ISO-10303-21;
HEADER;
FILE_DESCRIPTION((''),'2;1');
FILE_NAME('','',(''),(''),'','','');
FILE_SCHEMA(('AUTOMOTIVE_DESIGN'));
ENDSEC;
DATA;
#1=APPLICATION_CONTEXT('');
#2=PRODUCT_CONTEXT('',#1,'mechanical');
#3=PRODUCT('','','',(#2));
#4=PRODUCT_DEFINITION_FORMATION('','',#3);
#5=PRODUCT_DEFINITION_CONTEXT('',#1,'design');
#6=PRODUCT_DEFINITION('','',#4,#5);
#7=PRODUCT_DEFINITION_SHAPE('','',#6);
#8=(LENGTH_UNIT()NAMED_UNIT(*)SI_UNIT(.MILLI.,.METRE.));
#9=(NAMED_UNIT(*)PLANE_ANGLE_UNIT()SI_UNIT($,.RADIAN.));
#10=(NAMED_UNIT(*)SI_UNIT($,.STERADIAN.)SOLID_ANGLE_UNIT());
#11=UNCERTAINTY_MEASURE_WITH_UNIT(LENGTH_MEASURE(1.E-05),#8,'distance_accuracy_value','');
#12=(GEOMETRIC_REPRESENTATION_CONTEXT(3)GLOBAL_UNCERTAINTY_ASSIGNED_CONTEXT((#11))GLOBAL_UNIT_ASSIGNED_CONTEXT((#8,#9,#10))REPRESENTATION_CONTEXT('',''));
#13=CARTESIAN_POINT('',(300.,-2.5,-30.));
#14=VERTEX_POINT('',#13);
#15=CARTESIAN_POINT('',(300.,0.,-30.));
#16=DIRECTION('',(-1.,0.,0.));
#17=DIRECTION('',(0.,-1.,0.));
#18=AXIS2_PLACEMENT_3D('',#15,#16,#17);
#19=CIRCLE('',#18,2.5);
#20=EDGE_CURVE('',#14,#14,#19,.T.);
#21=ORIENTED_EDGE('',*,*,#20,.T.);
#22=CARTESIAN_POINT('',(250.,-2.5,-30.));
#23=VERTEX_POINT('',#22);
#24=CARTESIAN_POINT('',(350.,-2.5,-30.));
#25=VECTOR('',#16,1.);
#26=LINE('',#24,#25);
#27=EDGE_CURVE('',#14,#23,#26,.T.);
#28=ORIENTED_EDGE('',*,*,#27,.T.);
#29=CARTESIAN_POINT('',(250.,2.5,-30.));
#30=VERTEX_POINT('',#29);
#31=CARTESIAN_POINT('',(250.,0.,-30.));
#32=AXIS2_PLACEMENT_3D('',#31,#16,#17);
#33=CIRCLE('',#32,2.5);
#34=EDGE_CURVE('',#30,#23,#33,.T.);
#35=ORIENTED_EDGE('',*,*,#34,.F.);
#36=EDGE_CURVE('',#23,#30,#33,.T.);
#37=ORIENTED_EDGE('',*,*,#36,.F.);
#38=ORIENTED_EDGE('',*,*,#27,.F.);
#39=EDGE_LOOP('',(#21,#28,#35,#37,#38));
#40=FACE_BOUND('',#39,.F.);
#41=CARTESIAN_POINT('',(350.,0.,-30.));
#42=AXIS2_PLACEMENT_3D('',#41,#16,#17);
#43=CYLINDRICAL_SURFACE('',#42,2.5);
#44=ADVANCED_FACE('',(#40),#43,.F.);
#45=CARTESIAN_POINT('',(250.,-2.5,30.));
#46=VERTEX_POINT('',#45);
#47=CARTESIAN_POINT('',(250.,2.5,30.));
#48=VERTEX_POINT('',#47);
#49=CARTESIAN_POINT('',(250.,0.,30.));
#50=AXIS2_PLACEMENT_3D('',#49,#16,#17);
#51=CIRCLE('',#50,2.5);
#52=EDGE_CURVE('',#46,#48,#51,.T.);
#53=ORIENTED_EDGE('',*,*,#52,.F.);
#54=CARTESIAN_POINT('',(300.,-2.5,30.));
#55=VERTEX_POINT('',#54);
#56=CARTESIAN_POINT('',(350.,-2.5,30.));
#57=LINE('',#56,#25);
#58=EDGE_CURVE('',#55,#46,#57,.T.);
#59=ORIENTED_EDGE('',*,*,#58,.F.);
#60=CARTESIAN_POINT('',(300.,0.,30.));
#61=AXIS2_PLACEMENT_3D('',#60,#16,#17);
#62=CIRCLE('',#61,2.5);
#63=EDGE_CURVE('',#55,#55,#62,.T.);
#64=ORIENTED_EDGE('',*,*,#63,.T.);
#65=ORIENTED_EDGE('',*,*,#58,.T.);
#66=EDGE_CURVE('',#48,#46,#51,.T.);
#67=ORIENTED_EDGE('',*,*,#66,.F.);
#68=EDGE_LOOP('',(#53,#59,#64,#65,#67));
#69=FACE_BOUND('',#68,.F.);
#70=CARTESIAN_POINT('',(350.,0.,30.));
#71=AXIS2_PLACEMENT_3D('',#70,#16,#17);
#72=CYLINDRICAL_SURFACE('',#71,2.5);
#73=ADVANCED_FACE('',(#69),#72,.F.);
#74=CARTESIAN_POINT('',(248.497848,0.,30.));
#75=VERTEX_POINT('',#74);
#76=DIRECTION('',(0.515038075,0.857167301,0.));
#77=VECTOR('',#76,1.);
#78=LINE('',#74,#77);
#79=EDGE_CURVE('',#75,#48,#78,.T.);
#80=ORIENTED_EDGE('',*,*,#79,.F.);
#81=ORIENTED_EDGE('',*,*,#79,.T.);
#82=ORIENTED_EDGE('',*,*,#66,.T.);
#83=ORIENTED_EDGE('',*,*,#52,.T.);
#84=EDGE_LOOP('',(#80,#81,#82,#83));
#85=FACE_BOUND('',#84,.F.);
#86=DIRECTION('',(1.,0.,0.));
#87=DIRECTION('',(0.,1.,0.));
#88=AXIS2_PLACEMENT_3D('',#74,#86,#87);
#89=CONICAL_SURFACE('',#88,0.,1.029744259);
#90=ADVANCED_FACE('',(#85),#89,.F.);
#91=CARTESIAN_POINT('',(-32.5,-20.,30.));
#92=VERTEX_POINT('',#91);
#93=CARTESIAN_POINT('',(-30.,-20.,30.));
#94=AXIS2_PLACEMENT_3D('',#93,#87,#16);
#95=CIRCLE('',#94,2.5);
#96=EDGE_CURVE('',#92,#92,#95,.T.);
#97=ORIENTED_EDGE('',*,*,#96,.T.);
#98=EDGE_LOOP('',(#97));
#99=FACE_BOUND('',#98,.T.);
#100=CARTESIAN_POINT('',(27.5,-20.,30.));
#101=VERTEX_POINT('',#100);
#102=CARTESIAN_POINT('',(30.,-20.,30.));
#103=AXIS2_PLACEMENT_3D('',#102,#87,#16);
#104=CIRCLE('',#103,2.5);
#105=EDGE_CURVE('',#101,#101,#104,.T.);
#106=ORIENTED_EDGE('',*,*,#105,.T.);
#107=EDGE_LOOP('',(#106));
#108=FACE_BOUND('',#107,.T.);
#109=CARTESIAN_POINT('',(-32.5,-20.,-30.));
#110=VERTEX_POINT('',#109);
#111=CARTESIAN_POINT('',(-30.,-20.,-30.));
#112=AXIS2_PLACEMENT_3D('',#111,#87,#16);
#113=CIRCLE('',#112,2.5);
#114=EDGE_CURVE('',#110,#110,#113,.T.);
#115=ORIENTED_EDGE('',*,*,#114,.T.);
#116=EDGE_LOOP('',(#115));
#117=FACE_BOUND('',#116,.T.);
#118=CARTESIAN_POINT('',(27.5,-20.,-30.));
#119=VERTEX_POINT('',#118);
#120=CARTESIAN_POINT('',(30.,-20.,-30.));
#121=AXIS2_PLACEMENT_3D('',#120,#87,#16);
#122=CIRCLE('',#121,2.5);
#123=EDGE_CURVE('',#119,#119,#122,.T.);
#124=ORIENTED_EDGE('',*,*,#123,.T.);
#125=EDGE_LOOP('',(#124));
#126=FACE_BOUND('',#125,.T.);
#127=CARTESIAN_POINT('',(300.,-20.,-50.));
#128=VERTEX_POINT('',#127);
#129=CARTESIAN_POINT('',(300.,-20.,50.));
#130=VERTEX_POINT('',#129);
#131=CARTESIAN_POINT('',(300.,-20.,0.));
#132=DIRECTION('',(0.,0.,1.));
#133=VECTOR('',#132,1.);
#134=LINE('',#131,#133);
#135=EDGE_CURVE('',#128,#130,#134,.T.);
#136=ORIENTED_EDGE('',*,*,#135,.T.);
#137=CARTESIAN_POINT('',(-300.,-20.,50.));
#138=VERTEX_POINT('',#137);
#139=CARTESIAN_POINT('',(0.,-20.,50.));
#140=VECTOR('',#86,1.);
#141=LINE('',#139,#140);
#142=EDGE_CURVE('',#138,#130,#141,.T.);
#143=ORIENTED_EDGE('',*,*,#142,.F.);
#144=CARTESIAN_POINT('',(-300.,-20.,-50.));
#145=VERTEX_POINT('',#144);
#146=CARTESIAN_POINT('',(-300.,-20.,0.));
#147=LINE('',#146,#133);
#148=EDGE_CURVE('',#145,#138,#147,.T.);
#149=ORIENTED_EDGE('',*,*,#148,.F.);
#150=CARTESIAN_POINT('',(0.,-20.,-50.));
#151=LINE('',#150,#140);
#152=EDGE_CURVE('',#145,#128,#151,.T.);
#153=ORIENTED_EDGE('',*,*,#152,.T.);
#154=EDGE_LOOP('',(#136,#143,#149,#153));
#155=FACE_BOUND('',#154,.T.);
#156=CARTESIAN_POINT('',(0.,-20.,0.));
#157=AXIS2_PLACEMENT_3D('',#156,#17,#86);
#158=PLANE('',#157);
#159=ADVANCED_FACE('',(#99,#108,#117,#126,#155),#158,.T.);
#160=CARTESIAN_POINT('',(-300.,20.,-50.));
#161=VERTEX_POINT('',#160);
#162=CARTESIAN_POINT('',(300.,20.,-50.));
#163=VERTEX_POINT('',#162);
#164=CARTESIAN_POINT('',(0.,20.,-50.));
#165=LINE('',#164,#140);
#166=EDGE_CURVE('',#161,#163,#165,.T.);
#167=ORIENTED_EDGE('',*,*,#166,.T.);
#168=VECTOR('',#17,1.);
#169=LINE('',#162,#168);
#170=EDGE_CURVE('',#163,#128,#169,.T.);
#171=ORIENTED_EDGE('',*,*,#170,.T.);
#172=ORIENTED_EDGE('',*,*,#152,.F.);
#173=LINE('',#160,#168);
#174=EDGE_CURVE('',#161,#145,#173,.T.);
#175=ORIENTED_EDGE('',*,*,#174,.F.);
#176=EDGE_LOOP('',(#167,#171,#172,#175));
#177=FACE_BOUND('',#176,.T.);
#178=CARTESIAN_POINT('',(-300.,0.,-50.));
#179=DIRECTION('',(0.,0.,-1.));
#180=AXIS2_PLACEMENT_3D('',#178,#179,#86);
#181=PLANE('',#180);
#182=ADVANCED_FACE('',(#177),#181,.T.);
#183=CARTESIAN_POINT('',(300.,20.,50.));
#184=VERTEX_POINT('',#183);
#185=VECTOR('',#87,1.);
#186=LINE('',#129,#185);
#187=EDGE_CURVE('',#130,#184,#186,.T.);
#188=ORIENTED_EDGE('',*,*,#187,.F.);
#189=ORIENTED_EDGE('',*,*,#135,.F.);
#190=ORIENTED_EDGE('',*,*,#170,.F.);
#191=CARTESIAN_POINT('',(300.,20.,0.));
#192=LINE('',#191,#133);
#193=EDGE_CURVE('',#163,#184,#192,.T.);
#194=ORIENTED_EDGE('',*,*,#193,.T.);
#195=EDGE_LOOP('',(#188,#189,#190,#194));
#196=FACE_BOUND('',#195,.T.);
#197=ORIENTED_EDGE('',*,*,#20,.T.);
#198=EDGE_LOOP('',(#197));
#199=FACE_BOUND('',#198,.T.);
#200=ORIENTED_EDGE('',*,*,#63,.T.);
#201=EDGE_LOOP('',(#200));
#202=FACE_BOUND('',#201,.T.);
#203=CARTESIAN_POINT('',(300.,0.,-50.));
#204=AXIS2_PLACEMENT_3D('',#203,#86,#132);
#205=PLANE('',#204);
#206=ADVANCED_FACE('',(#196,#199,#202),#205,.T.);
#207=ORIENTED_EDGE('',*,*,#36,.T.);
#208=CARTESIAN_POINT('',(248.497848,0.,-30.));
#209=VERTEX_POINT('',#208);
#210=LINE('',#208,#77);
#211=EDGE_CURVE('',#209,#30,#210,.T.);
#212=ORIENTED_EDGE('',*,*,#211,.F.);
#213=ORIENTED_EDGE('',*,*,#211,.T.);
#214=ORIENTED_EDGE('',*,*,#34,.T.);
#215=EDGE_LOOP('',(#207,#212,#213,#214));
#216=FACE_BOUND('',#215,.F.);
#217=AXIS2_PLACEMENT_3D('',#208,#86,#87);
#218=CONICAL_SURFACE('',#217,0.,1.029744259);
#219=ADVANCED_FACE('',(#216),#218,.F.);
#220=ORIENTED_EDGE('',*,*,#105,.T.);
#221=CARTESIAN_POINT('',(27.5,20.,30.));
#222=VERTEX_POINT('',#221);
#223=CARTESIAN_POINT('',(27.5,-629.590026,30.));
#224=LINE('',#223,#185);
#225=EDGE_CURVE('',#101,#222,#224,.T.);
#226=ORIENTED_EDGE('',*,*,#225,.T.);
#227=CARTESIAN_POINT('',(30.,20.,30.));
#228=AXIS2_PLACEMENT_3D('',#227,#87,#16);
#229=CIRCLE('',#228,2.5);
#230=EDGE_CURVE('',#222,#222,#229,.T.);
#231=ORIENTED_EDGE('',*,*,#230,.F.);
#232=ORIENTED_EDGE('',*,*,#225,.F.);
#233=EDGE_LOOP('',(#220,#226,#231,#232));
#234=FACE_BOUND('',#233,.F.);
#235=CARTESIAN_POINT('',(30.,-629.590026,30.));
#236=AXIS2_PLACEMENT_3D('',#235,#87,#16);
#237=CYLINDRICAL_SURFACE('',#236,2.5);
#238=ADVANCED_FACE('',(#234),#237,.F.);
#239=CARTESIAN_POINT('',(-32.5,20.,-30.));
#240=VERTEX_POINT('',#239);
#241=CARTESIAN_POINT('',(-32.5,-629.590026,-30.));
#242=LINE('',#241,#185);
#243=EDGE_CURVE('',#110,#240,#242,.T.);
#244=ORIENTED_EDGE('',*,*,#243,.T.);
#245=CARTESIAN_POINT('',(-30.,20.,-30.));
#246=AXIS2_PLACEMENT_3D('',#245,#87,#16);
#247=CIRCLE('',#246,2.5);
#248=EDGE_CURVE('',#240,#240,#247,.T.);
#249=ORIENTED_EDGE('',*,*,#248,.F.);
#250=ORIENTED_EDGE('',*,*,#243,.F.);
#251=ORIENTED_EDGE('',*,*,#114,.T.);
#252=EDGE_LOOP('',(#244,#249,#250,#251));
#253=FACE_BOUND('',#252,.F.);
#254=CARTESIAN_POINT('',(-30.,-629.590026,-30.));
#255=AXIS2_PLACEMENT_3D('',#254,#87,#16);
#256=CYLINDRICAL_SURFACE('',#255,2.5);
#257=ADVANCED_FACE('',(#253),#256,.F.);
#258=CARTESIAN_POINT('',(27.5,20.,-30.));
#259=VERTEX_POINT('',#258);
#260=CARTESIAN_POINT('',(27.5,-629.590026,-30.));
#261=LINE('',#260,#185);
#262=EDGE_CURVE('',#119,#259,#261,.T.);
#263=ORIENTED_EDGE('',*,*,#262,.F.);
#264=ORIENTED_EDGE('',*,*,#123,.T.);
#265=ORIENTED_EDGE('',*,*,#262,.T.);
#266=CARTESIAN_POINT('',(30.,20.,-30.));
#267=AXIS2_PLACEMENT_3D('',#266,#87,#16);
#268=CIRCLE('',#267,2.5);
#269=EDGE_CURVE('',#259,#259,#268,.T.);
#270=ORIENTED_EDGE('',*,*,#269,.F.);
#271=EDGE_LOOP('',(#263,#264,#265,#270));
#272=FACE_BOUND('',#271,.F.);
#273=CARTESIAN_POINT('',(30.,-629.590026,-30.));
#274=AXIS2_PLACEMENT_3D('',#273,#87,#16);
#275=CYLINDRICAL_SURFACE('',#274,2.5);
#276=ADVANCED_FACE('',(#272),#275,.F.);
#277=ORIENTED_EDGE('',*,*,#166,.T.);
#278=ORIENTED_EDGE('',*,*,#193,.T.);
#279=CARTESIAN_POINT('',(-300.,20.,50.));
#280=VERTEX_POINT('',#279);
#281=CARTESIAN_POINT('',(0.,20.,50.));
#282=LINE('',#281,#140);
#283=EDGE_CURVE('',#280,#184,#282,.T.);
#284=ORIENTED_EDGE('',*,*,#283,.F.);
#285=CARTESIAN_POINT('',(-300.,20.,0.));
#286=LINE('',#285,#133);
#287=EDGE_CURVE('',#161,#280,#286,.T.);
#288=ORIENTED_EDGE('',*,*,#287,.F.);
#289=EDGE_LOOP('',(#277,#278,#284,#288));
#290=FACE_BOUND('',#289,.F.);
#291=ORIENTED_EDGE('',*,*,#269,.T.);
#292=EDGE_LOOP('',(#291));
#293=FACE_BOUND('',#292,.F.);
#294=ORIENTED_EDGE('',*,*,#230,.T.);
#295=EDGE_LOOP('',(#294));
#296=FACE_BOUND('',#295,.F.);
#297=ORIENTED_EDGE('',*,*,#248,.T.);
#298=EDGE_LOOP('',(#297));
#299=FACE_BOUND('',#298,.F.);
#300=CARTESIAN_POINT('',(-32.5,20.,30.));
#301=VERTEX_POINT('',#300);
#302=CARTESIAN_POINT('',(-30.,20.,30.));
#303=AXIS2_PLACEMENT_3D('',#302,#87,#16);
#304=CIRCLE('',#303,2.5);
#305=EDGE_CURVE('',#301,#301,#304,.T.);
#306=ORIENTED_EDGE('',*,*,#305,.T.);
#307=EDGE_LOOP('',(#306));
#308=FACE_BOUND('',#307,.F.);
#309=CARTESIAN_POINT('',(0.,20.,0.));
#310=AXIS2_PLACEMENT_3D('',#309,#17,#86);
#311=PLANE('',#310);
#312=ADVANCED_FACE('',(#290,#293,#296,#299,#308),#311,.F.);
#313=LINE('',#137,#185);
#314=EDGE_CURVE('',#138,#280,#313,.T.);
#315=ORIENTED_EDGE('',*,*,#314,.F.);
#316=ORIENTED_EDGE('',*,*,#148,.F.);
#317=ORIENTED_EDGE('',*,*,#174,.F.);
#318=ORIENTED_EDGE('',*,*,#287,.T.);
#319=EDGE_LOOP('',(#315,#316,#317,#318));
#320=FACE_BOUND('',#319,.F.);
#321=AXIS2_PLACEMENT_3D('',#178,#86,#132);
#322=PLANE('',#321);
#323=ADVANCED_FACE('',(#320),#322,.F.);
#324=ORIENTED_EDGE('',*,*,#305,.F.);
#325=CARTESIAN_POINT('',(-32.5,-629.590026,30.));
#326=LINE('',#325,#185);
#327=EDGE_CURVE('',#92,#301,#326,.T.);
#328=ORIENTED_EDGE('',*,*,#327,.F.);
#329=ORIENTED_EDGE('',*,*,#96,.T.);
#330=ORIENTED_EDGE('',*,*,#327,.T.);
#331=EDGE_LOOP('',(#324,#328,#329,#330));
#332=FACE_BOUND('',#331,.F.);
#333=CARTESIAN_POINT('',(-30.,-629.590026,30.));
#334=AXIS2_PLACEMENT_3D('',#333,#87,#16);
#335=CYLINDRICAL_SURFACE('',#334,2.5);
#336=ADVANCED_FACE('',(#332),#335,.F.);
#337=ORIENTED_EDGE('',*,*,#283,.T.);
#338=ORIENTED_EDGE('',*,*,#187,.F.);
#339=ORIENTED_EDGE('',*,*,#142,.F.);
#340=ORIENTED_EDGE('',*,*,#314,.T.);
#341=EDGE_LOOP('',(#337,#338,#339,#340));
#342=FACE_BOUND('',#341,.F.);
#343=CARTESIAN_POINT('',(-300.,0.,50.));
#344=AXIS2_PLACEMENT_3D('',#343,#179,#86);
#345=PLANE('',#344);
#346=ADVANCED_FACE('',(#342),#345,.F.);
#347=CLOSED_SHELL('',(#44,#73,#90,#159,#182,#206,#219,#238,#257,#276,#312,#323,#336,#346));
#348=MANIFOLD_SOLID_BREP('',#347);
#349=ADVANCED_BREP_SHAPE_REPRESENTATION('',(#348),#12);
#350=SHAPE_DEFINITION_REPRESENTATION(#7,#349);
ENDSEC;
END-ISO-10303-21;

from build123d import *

# Parameters (mm, degrees)
F0_W     = 600
F0_H     = 100
F1_DEPTH = 20
F3_D     = 5
F5_D     = 5
F5_DEPTH = 50
F5_TIP   = 1.5021515476


# Not quite as in the source:
# - a feature names something its author has since deleted; it is built from what else it names


with BuildPart() as f1:
    # F0 (on Front) → F1 (new body, symmetric)
    with BuildSketch(Plane.XZ):
        Rectangle(F0_W, F0_H)
    extrude(amount=F1_DEPTH, both=True)

    # F3 (through all)
    with Locations(Plane.XZ.offset(20)):
        with Locations((-30, 30), (30, 30), (-30, -30), (30, -30)):
            Hole(F3_D / 2)

    # F5
    with Locations(Plane.YZ.offset(300)):
        with Locations((0, 30), (0, -30)):
            Hole(F5_D / 2, depth=F5_DEPTH)
            with Locations((0, 0, -(F5_DEPTH + F5_TIP / 2))):  # 118° drill point
                Cone(0, F5_D / 2, F5_TIP, mode=Mode.SUBTRACT)


solid = f1.part
